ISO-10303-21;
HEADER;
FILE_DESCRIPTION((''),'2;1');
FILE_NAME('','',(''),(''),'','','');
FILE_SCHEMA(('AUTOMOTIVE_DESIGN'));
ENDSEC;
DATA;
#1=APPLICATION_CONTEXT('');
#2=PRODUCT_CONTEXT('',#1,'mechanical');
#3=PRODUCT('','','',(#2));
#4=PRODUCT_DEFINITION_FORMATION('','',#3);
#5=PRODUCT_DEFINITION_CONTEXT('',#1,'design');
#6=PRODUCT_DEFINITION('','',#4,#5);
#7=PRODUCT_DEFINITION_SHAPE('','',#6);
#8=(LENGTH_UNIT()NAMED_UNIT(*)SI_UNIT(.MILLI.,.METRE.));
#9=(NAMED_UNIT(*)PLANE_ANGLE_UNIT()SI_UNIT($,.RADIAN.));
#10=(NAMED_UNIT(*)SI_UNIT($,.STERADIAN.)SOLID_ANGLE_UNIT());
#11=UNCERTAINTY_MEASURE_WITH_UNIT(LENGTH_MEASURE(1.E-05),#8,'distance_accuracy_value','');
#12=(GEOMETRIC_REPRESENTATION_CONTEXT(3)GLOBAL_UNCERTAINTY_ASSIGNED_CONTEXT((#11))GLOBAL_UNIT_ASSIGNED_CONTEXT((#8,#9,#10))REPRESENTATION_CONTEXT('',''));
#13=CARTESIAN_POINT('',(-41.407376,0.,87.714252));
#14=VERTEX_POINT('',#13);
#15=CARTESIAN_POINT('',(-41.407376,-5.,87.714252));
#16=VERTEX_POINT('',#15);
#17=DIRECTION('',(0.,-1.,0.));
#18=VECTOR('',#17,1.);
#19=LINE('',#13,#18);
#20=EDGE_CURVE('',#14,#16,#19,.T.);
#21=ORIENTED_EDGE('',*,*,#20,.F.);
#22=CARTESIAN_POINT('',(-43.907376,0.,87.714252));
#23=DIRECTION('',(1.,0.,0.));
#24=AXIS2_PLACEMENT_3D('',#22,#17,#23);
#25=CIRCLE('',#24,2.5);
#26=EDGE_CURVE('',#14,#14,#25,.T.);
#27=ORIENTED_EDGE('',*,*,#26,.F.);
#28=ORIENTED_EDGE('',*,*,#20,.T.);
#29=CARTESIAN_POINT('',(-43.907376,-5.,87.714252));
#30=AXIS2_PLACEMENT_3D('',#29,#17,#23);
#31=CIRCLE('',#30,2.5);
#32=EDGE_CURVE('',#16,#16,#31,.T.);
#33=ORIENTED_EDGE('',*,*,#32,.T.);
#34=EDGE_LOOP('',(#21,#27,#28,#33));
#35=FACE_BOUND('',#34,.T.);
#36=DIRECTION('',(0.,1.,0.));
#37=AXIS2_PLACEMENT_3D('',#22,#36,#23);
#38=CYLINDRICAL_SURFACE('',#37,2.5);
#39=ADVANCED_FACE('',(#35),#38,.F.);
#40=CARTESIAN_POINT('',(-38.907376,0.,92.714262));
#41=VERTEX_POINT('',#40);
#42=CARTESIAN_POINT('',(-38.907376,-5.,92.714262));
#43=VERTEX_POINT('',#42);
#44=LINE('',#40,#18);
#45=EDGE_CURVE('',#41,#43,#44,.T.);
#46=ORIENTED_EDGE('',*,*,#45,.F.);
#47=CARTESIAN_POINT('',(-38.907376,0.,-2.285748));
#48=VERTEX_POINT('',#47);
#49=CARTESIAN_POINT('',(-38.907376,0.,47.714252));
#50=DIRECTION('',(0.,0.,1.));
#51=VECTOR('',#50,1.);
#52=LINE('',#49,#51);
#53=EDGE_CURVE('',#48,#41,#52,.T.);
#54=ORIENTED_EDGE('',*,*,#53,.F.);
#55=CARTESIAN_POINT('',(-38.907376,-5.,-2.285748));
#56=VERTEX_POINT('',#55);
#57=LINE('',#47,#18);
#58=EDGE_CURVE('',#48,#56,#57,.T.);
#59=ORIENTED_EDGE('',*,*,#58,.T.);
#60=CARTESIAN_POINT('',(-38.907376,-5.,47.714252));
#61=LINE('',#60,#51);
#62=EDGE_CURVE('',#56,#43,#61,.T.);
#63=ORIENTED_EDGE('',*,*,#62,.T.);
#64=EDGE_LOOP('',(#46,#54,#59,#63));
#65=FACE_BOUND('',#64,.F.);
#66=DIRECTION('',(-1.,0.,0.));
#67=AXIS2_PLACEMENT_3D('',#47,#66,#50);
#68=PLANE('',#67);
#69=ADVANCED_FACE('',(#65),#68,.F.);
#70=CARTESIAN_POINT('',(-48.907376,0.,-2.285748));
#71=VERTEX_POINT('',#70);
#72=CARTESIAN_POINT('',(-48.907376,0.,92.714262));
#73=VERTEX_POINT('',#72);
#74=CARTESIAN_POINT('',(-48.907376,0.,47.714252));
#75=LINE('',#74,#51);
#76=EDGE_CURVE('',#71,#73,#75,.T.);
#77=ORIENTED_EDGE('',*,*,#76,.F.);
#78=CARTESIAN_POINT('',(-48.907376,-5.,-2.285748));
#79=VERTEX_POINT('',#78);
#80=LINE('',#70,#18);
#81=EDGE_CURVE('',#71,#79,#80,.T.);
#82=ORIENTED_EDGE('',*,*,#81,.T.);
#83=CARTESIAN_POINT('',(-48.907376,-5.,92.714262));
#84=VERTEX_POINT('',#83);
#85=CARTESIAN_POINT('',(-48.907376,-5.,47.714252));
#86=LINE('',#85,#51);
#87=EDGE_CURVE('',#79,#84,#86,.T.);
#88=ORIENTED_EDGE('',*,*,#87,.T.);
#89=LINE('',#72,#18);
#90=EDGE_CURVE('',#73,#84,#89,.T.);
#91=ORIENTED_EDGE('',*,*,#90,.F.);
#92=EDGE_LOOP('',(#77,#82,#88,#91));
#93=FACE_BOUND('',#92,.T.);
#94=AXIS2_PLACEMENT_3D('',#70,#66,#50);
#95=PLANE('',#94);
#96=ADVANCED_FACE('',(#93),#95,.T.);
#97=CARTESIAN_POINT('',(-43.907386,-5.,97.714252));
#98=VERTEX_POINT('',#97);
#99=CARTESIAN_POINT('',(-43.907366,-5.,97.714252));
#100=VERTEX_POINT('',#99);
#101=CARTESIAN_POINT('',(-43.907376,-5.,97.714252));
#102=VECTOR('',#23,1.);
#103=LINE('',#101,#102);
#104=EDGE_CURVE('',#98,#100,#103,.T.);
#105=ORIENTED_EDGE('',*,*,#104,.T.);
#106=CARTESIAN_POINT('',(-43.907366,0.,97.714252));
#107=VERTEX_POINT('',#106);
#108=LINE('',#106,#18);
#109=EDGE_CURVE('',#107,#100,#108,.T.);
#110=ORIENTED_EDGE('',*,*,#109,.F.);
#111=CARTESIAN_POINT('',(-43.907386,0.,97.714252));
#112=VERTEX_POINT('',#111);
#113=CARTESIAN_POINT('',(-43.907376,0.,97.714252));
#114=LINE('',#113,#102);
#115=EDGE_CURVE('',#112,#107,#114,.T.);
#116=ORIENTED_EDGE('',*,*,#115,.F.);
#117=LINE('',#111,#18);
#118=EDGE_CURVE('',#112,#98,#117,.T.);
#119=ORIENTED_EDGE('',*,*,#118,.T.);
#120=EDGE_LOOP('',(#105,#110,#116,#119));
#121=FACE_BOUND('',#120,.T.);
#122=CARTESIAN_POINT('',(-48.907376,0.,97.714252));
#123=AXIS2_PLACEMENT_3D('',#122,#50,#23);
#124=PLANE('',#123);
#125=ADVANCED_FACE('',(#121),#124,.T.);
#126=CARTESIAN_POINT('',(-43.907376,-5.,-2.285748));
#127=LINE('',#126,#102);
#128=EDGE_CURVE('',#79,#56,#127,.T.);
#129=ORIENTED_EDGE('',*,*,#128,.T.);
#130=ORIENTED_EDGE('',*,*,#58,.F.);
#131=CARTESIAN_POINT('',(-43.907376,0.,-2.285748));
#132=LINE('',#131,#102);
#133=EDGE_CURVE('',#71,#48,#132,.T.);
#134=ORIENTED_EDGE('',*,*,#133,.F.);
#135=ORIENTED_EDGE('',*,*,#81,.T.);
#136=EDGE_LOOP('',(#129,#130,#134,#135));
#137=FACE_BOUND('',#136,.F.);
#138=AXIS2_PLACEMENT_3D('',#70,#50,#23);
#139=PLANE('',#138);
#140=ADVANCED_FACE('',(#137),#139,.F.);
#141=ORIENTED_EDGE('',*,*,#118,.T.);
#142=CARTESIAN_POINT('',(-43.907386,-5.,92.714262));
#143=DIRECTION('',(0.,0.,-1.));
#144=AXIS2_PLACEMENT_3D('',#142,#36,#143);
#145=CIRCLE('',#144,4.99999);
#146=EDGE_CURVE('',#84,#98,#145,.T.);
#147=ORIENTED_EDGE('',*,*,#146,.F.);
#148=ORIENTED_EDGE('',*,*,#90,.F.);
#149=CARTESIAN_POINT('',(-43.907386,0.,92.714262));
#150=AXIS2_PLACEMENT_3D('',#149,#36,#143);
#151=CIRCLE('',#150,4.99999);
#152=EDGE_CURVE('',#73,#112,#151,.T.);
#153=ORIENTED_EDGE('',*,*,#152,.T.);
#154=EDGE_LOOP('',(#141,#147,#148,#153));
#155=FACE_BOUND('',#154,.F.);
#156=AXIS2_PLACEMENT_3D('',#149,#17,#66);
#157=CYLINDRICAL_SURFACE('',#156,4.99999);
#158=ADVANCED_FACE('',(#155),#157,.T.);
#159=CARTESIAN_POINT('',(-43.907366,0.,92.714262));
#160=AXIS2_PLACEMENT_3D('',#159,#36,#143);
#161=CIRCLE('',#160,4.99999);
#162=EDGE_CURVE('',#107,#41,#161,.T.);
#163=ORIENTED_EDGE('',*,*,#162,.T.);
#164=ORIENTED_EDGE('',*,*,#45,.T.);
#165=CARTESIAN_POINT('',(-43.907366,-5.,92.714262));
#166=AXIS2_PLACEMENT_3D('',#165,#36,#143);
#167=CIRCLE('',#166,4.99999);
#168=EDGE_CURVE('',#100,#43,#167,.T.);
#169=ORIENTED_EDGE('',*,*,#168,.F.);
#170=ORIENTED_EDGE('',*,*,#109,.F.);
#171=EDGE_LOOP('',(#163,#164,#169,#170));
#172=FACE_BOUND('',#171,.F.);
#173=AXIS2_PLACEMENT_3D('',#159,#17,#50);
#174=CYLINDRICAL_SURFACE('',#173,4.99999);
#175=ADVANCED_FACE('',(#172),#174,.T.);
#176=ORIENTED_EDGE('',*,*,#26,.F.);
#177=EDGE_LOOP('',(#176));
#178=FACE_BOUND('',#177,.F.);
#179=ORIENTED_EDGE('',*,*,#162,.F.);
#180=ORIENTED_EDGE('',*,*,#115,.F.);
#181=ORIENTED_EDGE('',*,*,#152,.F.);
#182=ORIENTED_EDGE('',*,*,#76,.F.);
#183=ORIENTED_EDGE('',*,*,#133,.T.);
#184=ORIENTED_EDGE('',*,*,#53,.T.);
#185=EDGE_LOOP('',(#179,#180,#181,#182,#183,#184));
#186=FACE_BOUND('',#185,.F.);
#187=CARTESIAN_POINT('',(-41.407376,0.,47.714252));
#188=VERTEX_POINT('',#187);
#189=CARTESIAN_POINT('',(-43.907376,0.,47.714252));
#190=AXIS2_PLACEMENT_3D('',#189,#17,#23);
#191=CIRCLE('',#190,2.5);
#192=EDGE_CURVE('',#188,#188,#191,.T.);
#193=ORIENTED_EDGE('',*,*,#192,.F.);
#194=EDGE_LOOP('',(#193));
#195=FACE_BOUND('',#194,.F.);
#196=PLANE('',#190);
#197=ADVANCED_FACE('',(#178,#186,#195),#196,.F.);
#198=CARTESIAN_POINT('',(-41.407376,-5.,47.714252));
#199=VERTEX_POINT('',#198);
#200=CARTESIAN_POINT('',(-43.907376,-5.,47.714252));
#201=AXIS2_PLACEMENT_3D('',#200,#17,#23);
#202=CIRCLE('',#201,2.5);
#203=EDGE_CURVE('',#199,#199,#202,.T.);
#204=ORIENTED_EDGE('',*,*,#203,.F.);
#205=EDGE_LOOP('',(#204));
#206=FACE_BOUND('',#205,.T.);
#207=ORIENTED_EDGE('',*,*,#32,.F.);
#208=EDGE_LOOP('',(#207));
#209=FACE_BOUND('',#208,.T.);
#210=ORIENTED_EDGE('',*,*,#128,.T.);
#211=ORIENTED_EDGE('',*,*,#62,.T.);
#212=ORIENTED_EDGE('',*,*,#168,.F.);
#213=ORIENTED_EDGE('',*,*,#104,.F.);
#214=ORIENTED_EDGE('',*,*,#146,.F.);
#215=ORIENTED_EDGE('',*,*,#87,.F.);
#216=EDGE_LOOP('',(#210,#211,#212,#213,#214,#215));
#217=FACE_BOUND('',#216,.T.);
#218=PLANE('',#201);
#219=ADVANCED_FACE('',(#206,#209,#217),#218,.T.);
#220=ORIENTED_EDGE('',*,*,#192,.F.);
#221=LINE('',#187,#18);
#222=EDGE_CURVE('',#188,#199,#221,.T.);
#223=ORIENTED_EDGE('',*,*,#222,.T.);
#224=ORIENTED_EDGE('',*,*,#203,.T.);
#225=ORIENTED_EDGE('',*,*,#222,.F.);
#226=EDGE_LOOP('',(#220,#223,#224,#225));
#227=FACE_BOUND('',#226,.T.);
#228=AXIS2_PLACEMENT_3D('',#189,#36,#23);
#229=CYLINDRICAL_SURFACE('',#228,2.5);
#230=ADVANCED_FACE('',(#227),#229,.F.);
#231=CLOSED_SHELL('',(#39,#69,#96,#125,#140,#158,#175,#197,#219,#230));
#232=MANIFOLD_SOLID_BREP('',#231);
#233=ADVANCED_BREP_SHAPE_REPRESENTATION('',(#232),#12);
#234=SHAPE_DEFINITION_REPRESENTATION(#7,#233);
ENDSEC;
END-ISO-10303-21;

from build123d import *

# Parameters (mm, degrees)
F0_W     = 10
F0_H     = 100
F0_R     = 2.5
F1_DEPTH = 5
F2_R     = 4.99999


# Not quite as in the source:
# - a fillet or chamfer is up to 0.001 mm smaller than in the source, because OpenCascade refuses the exact size


with BuildPart() as f1:
    # F0 (on Front) → F1 (new body)
    with BuildSketch(Plane.XZ):
        with Locations((-43.9073760062, 47.7142522777)):
            Rectangle(F0_W, F0_H)
        with Locations((-43.9073760062, 47.7142522777)):
            Circle(F0_R, mode=Mode.SUBTRACT)
        with Locations((-43.9073760062, 87.7142522777)):
            Circle(F0_R, mode=Mode.SUBTRACT)
    extrude(amount=F1_DEPTH)

    # F2 (radius 5 in the source; OpenCascade refuses exactly that, so slightly less here)
    f2_edges = [f1.edges().sort_by_distance(p)[0] for p in [
        (-48.907376, -2.5, 97.714252),
        (-38.907376, -2.5, 97.714252),
    ]]
    fillet(f2_edges, radius=F2_R)


solid = f1.part
